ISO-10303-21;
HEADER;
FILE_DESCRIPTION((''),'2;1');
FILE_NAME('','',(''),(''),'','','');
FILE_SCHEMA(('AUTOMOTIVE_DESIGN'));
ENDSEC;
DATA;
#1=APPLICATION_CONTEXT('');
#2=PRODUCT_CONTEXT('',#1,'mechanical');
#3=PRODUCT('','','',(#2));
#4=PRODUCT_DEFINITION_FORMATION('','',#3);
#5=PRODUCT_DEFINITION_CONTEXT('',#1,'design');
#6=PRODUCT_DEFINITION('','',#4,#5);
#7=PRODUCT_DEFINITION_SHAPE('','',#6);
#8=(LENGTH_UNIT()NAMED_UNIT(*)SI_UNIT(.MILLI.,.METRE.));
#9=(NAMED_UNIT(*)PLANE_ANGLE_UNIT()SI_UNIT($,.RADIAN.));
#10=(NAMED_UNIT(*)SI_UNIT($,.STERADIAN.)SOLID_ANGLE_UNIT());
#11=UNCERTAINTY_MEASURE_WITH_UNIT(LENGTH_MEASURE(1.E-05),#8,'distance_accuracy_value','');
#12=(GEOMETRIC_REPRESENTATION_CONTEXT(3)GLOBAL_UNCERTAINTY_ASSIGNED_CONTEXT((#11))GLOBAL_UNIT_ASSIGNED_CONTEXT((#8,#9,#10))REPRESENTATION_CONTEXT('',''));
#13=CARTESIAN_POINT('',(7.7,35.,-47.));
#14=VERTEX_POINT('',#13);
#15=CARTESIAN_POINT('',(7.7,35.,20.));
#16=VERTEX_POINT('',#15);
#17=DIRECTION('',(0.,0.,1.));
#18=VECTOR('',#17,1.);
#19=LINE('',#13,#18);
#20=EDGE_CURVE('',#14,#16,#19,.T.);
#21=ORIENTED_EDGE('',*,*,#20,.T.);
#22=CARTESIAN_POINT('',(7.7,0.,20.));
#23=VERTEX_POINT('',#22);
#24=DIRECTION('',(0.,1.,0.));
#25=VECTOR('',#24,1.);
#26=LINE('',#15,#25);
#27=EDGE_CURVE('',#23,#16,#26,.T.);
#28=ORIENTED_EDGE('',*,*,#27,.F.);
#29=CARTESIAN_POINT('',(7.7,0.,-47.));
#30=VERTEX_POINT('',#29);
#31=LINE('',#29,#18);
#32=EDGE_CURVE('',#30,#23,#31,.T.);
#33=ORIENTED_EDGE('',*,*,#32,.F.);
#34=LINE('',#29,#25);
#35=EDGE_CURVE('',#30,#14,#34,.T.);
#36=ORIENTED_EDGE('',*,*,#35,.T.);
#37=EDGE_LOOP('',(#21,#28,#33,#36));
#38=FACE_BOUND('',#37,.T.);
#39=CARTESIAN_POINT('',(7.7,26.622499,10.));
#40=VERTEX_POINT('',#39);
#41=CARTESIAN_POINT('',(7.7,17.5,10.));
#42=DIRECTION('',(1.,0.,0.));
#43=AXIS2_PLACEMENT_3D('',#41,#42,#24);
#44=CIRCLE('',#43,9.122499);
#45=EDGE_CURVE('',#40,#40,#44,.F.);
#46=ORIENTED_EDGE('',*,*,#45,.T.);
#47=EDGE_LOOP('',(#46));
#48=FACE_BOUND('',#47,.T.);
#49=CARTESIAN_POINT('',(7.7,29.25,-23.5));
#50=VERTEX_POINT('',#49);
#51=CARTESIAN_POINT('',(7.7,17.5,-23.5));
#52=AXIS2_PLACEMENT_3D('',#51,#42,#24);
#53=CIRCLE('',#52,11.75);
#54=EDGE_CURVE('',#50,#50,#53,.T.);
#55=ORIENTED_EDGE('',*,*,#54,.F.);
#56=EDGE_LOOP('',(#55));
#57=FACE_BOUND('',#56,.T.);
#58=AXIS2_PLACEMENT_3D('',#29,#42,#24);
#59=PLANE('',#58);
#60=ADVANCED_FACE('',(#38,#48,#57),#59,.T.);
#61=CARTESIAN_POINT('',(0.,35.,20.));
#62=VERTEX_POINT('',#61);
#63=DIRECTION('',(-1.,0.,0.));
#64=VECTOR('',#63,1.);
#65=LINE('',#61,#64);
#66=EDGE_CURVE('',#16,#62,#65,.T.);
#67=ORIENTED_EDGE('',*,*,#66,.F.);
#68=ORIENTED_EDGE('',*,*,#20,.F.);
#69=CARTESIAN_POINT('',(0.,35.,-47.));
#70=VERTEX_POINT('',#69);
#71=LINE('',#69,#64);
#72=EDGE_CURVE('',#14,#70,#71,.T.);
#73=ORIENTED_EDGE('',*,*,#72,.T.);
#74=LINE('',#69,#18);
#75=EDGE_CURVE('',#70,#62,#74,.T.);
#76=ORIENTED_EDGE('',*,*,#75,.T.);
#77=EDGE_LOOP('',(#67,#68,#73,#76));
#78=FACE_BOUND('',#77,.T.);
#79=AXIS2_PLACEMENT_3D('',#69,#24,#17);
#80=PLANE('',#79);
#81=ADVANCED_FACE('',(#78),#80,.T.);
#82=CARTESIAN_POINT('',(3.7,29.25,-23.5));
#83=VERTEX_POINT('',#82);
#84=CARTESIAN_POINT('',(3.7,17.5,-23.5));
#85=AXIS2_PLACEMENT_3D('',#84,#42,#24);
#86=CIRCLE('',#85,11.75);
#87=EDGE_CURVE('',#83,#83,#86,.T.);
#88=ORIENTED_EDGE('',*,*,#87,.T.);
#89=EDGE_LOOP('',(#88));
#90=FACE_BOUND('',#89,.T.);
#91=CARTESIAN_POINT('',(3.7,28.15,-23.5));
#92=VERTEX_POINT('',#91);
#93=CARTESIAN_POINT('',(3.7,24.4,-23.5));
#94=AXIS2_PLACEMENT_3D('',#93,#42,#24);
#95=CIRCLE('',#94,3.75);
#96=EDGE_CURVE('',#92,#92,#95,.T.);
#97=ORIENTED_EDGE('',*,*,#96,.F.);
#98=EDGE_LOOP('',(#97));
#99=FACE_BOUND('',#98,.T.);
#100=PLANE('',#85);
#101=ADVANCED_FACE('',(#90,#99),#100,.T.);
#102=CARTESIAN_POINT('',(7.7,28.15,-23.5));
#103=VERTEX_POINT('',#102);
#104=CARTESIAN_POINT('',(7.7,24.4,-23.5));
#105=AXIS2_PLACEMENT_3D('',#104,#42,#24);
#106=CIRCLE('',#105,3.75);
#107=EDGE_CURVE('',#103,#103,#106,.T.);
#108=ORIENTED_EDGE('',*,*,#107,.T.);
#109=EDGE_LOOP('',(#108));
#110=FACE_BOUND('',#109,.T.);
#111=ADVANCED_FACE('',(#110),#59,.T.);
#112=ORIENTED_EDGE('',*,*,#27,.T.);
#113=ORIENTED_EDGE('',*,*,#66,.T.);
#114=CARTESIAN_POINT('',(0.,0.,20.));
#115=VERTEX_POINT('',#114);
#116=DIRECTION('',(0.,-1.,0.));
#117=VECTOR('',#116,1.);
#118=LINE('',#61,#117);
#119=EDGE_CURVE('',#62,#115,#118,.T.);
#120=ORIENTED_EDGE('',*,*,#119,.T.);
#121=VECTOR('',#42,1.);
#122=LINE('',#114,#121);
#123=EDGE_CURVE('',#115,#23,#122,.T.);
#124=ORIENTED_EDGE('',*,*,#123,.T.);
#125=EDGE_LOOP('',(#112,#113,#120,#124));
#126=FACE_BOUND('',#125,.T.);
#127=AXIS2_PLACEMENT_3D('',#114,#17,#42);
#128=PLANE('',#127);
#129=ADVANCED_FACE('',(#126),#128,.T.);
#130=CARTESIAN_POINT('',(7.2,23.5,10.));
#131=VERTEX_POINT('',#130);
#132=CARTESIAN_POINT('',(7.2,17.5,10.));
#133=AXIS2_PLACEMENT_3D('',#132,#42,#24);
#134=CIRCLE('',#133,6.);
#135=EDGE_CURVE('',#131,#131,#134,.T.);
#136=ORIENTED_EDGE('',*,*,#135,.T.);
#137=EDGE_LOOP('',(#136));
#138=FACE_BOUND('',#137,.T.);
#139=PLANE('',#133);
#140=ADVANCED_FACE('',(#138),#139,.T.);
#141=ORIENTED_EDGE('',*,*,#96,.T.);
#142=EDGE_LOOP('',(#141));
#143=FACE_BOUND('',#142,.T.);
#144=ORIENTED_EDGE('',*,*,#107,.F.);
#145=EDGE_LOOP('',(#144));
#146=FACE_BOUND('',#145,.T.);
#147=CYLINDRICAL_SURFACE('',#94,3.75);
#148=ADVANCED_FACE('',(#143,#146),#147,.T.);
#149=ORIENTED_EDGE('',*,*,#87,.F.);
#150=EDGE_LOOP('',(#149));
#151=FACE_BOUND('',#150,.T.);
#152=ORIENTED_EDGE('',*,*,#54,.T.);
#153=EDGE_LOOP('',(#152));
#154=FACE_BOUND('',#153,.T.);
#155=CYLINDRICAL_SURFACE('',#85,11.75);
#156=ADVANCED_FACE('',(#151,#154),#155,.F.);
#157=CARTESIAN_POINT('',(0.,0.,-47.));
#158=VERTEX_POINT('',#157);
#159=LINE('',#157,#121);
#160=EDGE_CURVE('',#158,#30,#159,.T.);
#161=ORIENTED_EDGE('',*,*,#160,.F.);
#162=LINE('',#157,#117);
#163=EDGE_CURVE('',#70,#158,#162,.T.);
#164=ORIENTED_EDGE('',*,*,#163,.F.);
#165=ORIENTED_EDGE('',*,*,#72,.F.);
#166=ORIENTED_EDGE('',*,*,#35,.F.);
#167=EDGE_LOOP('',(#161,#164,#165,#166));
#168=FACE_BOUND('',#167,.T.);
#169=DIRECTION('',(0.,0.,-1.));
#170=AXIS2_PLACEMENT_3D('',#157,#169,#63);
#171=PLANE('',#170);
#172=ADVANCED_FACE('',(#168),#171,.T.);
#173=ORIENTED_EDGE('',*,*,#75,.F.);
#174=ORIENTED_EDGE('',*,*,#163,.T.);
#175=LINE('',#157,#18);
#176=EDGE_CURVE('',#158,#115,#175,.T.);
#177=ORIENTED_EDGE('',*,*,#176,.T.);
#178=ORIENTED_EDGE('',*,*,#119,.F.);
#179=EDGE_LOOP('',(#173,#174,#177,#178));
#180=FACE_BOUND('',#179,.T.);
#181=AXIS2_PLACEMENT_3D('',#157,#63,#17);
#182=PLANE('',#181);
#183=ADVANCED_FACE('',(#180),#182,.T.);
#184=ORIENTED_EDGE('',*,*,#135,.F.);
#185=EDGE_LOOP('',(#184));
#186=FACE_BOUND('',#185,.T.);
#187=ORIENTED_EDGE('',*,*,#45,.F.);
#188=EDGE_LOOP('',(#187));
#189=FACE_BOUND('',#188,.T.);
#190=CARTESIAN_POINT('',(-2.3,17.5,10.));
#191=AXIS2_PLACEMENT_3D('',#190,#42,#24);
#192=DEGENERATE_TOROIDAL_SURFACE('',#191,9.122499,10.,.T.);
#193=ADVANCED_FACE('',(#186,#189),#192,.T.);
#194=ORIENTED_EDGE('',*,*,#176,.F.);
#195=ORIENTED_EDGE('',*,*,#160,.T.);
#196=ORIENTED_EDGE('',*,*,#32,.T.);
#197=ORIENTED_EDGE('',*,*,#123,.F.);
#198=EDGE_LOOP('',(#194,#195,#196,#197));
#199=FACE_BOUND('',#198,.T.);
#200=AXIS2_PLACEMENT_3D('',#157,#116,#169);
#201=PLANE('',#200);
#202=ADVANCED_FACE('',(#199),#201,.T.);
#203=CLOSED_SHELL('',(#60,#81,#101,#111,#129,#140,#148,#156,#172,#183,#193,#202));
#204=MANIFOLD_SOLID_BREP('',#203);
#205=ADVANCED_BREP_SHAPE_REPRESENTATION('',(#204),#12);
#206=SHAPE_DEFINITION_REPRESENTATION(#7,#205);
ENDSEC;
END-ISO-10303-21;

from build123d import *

# Parameters (mm, degrees)
SKETCH1_W           = 7.7
SKETCH1_H           = 35
BOSS_EXTRUDE1_DEPTH = 47
SKETCH2_R           = 11.75
SKETCH2_R_2         = 3.75
CUT_EXTRUDE1_DEPTH  = 4
SKETCH3_W           = 7.7
SKETCH3_H           = 35
BOSS_EXTRUDE2_DEPTH = 20
SKETCH4_R           = 6
CUT_EXTRUDE2_DEPTH  = 0.5
FILLET1_R           = 10


with BuildPart() as part:
    # Sketch1 → Boss-Extrude1 (new body)
    with BuildSketch(Plane.XY):
        with Locations((3.85, 17.5)):
            Rectangle(SKETCH1_W, SKETCH1_H)
    extrude(amount=-BOSS_EXTRUDE1_DEPTH)

    # Sketch2 → Cut-Extrude1 (cut)
    with BuildSketch(Plane(origin=(7.7, 0, 0), x_dir=(0, 0, -1), z_dir=(1, 0, 0))):
        with Locations(Location((23.5, 17.5, 0), (0, 0, 90))):
            Circle(SKETCH2_R)
        with Locations(Location((23.5, 24.4, 0), (0, 0, 90))):
            Circle(SKETCH2_R_2, mode=Mode.SUBTRACT)
    extrude(amount=-CUT_EXTRUDE1_DEPTH, mode=Mode.SUBTRACT)

    # Sketch3 → Boss-Extrude2 (add)
    with BuildSketch(Plane.XY):
        with Locations((3.85, 17.5)):
            Rectangle(SKETCH3_W, SKETCH3_H)
    extrude(amount=BOSS_EXTRUDE2_DEPTH)

    # Sketch4 → Cut-Extrude2 (cut)
    with BuildSketch(Plane(origin=(7.7, 0, 0), x_dir=(0, 0, -1), z_dir=(1, 0, 0))):
        with Locations(Location((-10, 17.5, 0), (0, 0, 90))):
            Circle(SKETCH4_R)
    extrude(amount=-CUT_EXTRUDE2_DEPTH, mode=Mode.SUBTRACT)

    # Fillet1
    # the kernel refuses this fillet: 10 mm, written as the material it takes off along each edge
    with BuildSketch(Plane(origin=(7.7, 17.5, 10), x_dir=(0, 1, 0), z_dir=(0, 0, -1))) as fillet1_piece_1:
        with BuildLine():
            CenterArc((9.122498999, -10), FILLET1_R, 90, 18.194872339)
            Line((6, -0.5), (5.93755002, -0.31))
            ThreePointArc((5.93755002, -0.31), (5.8, -0.25), (5.8, 0))
            Line((5.8, 0), (6, 0.2))
            Line((6, 0.2), (9.122498999, 0.2))
            Line((9.122498999, 0.2), (9.122498999, 0))
        make_face()
    revolve(axis=Axis((7.7, 17.5, 10), (1, 0, 0)), mode=Mode.SUBTRACT)


solid = part.part
